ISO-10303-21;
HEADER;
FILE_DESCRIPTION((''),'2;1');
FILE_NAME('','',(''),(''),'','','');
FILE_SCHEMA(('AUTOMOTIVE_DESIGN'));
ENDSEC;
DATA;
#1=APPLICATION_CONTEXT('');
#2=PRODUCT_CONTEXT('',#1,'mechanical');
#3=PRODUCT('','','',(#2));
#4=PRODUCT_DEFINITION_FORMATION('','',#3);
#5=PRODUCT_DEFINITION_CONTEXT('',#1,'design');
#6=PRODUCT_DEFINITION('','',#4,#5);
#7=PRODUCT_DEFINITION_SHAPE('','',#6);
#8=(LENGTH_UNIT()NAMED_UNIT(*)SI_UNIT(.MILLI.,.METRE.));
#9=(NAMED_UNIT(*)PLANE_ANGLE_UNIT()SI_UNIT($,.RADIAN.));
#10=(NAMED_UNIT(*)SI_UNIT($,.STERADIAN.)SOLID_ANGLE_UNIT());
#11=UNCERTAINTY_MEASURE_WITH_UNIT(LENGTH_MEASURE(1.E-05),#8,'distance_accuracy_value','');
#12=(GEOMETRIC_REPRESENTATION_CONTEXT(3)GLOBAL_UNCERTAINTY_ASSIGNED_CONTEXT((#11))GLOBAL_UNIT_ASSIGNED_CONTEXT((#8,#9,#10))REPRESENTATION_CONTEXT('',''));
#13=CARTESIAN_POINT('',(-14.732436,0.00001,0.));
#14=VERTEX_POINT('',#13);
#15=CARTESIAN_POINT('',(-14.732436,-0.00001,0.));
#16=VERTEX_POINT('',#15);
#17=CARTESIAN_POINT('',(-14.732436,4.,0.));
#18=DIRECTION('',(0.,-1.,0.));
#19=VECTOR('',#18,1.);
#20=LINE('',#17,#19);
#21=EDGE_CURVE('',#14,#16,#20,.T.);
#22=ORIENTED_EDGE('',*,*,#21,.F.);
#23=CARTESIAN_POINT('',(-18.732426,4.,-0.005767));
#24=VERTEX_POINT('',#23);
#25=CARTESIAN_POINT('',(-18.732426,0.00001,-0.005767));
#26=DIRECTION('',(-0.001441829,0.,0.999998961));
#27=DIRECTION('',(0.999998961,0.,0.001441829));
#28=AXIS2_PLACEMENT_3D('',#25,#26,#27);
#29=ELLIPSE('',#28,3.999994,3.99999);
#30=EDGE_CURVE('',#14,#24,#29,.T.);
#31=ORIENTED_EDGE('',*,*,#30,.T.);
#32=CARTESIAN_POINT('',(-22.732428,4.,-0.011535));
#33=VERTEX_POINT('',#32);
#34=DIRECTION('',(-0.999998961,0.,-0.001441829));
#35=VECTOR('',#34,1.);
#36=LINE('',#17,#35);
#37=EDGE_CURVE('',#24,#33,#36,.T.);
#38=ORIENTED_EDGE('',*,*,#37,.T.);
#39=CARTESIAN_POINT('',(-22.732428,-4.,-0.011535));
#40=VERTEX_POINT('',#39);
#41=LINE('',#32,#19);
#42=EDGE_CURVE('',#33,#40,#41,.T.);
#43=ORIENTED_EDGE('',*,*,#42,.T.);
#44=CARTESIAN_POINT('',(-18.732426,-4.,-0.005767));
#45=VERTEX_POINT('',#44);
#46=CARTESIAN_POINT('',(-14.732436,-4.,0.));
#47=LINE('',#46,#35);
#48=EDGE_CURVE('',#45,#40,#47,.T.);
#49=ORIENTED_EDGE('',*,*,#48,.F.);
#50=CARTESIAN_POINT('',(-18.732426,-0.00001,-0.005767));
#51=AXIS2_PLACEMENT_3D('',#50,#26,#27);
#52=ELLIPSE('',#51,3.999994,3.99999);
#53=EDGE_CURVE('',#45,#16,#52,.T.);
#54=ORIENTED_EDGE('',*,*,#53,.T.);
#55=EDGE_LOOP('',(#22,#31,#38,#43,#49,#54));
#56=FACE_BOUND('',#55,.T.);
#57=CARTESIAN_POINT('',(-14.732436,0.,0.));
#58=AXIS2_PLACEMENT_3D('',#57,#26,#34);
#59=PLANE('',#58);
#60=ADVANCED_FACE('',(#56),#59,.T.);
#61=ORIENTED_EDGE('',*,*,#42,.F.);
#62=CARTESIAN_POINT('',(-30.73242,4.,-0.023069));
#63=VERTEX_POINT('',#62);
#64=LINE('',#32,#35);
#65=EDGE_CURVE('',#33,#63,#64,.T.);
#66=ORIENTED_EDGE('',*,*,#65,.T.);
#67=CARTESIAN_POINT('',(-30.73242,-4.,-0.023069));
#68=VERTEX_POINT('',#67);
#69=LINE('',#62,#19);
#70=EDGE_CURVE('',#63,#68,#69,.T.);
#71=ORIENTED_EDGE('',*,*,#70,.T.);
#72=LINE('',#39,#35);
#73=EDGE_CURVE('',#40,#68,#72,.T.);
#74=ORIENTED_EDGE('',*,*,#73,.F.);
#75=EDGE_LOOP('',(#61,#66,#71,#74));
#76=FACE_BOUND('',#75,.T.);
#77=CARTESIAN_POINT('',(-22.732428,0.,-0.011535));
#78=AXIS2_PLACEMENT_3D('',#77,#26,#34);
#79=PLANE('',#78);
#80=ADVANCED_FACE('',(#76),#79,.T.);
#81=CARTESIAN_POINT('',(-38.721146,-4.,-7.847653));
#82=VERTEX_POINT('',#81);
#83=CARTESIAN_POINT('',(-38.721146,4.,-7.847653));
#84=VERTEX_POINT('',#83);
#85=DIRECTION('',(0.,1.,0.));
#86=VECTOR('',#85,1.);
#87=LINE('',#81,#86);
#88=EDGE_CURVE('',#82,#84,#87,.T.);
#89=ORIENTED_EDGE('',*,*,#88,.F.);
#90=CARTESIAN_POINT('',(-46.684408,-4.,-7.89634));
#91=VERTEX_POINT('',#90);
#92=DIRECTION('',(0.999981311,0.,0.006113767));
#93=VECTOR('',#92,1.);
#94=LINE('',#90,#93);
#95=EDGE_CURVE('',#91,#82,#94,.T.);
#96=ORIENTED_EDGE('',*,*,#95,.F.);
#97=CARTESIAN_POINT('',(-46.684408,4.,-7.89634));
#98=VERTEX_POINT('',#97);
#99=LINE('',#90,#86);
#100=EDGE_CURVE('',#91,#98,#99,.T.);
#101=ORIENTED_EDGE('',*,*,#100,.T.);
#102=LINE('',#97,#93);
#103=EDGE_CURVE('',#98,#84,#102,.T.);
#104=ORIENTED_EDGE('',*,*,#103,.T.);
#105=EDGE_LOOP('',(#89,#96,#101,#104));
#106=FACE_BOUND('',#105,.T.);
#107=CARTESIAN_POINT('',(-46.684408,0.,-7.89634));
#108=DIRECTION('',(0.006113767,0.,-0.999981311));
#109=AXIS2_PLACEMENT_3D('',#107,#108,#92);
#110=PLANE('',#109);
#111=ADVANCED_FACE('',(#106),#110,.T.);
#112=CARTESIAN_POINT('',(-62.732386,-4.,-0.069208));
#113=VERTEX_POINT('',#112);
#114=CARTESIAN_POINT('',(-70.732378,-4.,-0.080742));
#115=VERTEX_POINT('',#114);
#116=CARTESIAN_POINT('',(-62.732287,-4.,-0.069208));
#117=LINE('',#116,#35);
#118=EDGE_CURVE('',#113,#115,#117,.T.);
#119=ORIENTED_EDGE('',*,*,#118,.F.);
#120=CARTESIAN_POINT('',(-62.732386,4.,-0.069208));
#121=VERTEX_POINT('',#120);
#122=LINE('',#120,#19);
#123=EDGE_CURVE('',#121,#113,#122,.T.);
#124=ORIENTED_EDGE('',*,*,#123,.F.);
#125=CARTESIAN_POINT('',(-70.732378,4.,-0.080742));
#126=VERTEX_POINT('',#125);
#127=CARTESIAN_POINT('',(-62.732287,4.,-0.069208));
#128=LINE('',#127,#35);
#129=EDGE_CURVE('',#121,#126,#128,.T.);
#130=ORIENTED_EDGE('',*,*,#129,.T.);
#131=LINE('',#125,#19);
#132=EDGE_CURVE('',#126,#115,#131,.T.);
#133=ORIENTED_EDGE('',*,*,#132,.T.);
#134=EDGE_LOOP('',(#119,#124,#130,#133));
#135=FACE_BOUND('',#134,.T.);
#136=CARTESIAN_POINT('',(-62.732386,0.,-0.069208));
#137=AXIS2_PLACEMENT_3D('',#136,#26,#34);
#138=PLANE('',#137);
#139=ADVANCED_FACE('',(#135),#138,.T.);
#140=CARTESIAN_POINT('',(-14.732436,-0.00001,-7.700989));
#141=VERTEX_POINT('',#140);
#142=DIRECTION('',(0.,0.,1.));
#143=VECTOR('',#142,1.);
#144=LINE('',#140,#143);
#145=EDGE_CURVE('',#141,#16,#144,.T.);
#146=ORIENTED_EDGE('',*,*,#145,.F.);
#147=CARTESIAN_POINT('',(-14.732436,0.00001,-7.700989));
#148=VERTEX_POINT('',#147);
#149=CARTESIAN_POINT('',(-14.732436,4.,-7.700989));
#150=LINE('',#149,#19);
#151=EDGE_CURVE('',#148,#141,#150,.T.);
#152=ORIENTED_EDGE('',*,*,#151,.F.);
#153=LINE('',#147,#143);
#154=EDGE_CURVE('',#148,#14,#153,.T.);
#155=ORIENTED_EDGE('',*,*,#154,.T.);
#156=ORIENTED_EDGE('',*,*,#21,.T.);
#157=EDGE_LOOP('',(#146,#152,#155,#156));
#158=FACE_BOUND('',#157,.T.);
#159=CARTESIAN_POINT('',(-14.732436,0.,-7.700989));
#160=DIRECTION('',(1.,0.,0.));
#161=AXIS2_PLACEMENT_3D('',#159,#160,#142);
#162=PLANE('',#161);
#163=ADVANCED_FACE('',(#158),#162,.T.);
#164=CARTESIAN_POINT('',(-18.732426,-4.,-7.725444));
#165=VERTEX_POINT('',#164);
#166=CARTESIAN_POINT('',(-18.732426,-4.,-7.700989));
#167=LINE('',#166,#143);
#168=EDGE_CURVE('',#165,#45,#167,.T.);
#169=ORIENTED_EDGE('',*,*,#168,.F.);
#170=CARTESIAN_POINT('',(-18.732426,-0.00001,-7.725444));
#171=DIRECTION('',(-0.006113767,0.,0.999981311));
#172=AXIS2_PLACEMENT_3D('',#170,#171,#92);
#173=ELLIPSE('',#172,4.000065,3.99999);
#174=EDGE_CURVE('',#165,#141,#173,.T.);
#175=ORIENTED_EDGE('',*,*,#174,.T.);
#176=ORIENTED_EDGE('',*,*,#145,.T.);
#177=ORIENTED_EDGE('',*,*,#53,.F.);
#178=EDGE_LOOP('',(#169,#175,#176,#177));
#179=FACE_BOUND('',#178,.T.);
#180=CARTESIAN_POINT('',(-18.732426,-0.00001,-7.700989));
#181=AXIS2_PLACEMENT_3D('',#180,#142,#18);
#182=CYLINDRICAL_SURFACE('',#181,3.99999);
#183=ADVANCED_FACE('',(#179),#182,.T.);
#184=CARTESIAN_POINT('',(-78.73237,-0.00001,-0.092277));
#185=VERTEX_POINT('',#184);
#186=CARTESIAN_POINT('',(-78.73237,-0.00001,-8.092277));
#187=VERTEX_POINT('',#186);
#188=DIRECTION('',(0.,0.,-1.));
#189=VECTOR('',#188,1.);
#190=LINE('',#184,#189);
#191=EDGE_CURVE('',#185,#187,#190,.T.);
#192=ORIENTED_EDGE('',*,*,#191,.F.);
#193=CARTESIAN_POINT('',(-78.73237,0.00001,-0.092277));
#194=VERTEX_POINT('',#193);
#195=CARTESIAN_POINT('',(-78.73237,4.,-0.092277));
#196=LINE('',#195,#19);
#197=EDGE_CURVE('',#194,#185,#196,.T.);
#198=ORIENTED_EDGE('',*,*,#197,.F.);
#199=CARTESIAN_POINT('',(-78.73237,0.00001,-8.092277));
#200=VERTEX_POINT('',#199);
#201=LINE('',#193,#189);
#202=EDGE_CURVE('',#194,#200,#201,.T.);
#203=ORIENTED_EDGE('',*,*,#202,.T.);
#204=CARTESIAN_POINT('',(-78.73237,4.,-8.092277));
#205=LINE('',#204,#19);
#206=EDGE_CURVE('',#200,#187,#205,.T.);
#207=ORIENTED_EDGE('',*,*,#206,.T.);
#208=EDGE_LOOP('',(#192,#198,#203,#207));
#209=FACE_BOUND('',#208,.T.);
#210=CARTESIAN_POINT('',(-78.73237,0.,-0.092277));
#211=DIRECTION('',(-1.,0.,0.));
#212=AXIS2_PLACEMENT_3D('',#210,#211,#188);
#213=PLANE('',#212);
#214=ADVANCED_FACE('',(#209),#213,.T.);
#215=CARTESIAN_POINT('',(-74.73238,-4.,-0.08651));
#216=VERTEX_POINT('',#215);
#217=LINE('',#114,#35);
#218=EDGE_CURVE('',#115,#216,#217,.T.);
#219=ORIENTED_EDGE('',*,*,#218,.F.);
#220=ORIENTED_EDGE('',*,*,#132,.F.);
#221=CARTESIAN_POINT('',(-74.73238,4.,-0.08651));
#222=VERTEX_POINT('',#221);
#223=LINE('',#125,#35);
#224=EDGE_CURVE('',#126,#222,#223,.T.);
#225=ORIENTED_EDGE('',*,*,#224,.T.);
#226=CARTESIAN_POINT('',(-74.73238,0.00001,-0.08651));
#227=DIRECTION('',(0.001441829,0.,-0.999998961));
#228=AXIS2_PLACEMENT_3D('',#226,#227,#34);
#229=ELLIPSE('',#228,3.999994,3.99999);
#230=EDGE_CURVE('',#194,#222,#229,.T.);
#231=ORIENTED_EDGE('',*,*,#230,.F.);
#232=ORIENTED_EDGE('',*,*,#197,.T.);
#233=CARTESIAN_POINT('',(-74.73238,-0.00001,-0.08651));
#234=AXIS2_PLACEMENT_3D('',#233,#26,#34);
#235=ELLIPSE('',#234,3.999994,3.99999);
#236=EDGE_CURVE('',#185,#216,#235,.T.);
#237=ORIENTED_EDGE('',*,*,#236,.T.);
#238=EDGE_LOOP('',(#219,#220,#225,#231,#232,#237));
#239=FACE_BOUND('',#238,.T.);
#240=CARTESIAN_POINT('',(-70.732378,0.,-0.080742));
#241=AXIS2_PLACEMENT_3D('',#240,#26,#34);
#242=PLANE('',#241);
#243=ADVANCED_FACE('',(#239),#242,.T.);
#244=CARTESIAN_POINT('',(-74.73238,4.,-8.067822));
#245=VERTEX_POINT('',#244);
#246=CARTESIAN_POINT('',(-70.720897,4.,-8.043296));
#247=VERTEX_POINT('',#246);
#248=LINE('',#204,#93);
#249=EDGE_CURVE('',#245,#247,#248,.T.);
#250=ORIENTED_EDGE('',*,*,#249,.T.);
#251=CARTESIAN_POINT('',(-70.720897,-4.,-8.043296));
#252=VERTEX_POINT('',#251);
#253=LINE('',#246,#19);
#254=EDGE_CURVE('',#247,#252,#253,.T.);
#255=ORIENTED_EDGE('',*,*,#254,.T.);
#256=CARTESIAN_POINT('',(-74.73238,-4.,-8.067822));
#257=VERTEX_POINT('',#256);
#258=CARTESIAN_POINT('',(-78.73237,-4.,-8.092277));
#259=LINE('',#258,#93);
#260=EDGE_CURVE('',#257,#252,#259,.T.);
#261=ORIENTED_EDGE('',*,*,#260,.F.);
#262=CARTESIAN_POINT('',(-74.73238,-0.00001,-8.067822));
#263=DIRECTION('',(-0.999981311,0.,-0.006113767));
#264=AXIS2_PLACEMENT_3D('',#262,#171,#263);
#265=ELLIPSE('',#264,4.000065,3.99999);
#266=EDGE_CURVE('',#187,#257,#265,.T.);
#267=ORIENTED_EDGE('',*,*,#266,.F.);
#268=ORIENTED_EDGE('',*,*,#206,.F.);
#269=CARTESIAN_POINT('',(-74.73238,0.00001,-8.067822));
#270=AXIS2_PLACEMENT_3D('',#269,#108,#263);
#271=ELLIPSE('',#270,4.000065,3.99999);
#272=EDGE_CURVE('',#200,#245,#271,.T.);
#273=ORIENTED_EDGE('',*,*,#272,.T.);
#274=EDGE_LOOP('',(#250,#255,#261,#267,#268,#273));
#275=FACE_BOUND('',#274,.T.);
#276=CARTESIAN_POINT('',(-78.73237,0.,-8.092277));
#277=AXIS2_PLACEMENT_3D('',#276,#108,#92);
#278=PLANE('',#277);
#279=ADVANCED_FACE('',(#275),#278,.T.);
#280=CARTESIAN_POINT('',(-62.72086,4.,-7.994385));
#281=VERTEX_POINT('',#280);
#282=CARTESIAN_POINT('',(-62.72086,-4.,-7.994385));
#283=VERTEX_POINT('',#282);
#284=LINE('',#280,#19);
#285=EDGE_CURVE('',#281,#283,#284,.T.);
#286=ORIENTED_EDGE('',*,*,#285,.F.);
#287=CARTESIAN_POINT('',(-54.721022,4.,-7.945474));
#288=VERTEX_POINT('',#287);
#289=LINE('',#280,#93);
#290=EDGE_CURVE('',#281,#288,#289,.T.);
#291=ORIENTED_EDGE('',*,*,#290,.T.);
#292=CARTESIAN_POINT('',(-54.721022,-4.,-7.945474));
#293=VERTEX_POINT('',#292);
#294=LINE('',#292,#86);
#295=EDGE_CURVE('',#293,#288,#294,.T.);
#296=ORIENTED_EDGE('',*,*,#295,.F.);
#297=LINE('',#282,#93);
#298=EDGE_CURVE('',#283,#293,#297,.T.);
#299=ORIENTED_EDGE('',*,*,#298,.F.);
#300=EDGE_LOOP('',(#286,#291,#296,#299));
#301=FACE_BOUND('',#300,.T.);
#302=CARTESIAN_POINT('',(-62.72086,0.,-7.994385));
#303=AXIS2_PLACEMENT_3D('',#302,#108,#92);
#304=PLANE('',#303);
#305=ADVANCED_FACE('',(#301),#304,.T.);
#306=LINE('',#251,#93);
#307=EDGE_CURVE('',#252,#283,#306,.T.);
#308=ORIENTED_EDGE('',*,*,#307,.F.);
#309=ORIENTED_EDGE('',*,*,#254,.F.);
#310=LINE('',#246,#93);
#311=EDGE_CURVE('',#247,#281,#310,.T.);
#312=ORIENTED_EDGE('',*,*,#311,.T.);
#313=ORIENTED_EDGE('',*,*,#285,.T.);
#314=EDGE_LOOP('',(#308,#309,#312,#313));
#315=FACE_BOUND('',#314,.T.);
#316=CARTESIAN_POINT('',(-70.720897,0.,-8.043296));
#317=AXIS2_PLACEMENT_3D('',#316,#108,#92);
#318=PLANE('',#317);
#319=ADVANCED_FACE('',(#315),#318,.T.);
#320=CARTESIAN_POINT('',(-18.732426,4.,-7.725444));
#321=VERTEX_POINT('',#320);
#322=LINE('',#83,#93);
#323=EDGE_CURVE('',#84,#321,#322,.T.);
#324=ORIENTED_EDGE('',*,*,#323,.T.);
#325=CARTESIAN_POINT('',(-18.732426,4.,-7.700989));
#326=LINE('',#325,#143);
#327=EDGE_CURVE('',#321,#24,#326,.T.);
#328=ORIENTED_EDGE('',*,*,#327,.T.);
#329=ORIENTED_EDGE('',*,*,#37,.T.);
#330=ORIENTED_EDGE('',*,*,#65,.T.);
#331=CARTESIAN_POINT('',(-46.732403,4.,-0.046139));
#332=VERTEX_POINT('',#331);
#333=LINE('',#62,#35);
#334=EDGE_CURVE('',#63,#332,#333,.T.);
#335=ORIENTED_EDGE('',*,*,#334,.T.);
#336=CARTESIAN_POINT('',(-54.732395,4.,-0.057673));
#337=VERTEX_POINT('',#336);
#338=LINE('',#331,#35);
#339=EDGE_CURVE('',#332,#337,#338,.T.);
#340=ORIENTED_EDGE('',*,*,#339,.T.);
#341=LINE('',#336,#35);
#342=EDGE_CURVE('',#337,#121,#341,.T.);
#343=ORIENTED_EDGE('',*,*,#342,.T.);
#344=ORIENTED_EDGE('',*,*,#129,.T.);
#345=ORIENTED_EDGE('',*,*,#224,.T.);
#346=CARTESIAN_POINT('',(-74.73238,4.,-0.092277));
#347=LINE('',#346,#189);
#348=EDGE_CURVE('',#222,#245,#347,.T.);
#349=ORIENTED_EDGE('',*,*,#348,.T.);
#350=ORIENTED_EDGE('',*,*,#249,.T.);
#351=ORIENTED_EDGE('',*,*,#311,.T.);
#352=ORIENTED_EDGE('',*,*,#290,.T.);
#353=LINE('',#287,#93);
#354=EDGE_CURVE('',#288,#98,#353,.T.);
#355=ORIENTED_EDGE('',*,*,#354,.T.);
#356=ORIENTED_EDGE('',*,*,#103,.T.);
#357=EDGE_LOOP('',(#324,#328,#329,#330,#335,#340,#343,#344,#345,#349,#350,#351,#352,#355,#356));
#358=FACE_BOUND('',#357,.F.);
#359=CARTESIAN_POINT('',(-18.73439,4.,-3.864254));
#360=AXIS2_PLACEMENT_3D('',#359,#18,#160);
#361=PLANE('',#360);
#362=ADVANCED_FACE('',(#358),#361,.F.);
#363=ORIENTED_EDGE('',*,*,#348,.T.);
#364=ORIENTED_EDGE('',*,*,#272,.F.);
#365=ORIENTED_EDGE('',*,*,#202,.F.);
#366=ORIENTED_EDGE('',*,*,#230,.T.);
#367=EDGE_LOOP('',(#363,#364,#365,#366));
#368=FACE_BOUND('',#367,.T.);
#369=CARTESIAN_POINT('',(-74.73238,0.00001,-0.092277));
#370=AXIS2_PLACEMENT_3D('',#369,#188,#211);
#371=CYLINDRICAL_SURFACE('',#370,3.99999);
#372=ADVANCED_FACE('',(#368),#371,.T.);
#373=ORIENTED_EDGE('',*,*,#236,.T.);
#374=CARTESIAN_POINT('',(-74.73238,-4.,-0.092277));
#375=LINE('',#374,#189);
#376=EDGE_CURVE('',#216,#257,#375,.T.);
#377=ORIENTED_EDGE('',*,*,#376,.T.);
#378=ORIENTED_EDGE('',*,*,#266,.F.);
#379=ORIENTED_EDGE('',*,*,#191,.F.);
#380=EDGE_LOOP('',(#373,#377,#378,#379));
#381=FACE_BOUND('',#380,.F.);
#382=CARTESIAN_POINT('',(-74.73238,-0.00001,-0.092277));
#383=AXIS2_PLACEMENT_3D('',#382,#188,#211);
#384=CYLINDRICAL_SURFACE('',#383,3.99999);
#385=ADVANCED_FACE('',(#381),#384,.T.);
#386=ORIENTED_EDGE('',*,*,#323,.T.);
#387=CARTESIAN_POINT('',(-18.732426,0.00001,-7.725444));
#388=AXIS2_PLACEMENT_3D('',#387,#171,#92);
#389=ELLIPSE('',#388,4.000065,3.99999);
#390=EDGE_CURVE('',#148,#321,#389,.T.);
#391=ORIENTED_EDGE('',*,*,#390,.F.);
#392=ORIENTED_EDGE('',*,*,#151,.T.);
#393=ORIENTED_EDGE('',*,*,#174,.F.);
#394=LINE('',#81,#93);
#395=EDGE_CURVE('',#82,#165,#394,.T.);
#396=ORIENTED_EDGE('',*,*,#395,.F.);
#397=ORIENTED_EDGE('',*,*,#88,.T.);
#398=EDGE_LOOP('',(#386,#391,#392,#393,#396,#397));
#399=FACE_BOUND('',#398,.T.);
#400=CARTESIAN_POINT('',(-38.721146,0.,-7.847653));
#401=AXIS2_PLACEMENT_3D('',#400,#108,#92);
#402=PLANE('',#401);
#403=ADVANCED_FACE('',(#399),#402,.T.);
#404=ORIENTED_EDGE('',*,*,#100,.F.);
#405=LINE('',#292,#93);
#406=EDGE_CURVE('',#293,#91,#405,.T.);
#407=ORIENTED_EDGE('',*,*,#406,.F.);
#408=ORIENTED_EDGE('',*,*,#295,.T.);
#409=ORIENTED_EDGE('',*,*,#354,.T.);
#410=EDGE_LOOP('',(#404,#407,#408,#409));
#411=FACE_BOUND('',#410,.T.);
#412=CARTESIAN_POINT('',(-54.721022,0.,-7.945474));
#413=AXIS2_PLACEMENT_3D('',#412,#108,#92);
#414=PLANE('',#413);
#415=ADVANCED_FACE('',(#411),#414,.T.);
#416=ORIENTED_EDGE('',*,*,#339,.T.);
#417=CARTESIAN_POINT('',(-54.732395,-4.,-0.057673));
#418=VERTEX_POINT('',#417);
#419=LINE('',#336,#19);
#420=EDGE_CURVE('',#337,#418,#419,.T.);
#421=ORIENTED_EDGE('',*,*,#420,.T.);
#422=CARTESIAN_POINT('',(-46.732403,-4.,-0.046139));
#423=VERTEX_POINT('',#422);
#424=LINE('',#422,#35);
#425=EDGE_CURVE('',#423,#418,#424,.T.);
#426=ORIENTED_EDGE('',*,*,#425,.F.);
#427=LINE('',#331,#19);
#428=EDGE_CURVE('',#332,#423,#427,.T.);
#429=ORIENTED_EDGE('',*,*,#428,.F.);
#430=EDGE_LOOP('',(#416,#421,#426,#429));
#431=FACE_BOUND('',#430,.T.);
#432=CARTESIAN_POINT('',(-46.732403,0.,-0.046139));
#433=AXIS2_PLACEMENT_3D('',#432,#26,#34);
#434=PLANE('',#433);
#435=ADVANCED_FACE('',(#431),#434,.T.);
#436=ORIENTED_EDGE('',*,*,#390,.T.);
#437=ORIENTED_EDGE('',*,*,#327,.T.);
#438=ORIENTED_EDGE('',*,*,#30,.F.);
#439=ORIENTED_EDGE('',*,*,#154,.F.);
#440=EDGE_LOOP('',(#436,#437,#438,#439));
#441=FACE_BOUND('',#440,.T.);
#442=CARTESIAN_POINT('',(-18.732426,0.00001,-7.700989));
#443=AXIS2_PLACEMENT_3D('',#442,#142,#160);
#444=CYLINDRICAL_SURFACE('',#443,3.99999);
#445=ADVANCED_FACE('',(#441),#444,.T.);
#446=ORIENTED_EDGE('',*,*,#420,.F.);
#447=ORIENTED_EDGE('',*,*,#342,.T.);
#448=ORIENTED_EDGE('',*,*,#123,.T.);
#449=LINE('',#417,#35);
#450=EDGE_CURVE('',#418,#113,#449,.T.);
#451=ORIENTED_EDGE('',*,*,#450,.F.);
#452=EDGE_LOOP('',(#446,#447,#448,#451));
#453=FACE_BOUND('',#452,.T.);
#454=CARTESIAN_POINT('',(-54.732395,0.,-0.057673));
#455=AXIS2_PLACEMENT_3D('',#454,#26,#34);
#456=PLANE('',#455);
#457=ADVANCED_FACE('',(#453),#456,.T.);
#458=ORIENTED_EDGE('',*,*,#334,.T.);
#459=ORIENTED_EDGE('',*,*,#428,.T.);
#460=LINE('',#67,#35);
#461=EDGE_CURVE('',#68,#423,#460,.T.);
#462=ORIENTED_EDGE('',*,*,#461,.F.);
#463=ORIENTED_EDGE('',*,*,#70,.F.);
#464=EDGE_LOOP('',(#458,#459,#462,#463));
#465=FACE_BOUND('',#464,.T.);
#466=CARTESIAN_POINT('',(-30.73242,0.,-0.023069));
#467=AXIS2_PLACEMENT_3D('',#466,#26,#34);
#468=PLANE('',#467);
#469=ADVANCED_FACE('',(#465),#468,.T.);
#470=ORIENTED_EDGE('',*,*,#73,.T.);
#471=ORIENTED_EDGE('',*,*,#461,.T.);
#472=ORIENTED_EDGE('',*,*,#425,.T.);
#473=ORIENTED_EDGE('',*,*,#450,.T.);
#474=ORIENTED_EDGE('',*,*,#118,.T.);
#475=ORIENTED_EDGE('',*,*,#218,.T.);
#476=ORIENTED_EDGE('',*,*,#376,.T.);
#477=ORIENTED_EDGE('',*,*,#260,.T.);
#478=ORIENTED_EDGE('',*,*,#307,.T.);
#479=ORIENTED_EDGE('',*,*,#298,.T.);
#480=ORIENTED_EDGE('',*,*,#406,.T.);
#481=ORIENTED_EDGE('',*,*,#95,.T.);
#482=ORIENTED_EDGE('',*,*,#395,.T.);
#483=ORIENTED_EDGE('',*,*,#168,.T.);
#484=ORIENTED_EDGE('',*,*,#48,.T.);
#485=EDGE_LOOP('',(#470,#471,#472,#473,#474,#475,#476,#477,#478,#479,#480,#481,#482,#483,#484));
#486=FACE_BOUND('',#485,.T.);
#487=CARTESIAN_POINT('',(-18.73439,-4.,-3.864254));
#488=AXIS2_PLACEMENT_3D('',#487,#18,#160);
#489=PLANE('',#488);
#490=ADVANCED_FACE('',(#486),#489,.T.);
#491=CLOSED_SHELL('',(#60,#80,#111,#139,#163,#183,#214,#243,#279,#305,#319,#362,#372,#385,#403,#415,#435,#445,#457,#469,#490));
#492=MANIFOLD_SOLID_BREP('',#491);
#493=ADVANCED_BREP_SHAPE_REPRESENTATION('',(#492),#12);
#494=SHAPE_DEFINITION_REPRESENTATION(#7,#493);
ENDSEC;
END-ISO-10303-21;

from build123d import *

# Parameters (mm, degrees)
F1_DEPTH = 4
F2_R     = 3.99999


# Not quite as in the source:
# - a fillet or chamfer is up to 0.001 mm smaller than in the source, because OpenCascade refuses the exact size
# - ends of sketch curves that miss each other by under 0.0002 mm in the source are joined
# - a feature names something its author has since deleted; it is built from what else it names


with BuildPart() as f1:
    # F0 (on Front) → F1 (new body, symmetric)
    with BuildSketch(Plane.XZ):
        Polygon((-14.732436277, -7.7009890229), (-14.732436277, 0), (-22.7324279615, -0.0115346295), (-22.721270651, -7.7498318101), align=None)
        Polygon((-22.721270651, -7.7498318101), (-22.7324279615, -0.0115346295), (-30.732419646, -0.0230692591), (-30.7212084456, -7.7987424823), align=None)
        Polygon((-30.7212084456, -7.7987424823), (-30.732419646, -0.0230692591), (-38.7324113305, -0.0346038886), (-38.7211462402, -7.8476531545), align=None)
        Polygon((-38.7211462402, -7.8476531545), (-38.7324113305, -0.0346038886), (-46.732403015, -0.0461385181), (-46.6844078154, -7.8963395926), align=None)
        Polygon((-46.6844078154, -7.8963395926), (-46.732403015, -0.0461385181), (-54.7323946996, -0.0576731477), (-54.7210218294, -7.9454744989), align=None)
        Polygon((-54.7210218294, -7.9454744989), (-54.7323946996, -0.0576731477), (-62.7323863841, -0.0692077772), (-62.7208598391, -7.994384561), align=None)
        Polygon((-62.7208598391, -7.994384561), (-62.7322865984, -0.0692076333), (-70.7323780686, -0.0807424068), (-70.7208974186, -8.0432958433), align=None)
        Polygon((-70.7208974186, -8.0432958433), (-70.7323780686, -0.0807424068), (-78.7323697531, -0.0922770363), (-78.7323697531, -8.0922770363), align=None)
    extrude(amount=F1_DEPTH, both=True)

    # F2 (radius 4 in the source; OpenCascade refuses exactly that, so slightly less here)
    f2_edges = [f1.edges().sort_by_distance(p)[0] for p in [
        (-78.73237, 4, -4.092277),
        (-78.73237, -4, -4.092277),
        (-14.732436, 4, -3.850495),
        (-14.732436, -4, -3.850495),
    ]]
    fillet(f2_edges, radius=F2_R)


solid = f1.part
